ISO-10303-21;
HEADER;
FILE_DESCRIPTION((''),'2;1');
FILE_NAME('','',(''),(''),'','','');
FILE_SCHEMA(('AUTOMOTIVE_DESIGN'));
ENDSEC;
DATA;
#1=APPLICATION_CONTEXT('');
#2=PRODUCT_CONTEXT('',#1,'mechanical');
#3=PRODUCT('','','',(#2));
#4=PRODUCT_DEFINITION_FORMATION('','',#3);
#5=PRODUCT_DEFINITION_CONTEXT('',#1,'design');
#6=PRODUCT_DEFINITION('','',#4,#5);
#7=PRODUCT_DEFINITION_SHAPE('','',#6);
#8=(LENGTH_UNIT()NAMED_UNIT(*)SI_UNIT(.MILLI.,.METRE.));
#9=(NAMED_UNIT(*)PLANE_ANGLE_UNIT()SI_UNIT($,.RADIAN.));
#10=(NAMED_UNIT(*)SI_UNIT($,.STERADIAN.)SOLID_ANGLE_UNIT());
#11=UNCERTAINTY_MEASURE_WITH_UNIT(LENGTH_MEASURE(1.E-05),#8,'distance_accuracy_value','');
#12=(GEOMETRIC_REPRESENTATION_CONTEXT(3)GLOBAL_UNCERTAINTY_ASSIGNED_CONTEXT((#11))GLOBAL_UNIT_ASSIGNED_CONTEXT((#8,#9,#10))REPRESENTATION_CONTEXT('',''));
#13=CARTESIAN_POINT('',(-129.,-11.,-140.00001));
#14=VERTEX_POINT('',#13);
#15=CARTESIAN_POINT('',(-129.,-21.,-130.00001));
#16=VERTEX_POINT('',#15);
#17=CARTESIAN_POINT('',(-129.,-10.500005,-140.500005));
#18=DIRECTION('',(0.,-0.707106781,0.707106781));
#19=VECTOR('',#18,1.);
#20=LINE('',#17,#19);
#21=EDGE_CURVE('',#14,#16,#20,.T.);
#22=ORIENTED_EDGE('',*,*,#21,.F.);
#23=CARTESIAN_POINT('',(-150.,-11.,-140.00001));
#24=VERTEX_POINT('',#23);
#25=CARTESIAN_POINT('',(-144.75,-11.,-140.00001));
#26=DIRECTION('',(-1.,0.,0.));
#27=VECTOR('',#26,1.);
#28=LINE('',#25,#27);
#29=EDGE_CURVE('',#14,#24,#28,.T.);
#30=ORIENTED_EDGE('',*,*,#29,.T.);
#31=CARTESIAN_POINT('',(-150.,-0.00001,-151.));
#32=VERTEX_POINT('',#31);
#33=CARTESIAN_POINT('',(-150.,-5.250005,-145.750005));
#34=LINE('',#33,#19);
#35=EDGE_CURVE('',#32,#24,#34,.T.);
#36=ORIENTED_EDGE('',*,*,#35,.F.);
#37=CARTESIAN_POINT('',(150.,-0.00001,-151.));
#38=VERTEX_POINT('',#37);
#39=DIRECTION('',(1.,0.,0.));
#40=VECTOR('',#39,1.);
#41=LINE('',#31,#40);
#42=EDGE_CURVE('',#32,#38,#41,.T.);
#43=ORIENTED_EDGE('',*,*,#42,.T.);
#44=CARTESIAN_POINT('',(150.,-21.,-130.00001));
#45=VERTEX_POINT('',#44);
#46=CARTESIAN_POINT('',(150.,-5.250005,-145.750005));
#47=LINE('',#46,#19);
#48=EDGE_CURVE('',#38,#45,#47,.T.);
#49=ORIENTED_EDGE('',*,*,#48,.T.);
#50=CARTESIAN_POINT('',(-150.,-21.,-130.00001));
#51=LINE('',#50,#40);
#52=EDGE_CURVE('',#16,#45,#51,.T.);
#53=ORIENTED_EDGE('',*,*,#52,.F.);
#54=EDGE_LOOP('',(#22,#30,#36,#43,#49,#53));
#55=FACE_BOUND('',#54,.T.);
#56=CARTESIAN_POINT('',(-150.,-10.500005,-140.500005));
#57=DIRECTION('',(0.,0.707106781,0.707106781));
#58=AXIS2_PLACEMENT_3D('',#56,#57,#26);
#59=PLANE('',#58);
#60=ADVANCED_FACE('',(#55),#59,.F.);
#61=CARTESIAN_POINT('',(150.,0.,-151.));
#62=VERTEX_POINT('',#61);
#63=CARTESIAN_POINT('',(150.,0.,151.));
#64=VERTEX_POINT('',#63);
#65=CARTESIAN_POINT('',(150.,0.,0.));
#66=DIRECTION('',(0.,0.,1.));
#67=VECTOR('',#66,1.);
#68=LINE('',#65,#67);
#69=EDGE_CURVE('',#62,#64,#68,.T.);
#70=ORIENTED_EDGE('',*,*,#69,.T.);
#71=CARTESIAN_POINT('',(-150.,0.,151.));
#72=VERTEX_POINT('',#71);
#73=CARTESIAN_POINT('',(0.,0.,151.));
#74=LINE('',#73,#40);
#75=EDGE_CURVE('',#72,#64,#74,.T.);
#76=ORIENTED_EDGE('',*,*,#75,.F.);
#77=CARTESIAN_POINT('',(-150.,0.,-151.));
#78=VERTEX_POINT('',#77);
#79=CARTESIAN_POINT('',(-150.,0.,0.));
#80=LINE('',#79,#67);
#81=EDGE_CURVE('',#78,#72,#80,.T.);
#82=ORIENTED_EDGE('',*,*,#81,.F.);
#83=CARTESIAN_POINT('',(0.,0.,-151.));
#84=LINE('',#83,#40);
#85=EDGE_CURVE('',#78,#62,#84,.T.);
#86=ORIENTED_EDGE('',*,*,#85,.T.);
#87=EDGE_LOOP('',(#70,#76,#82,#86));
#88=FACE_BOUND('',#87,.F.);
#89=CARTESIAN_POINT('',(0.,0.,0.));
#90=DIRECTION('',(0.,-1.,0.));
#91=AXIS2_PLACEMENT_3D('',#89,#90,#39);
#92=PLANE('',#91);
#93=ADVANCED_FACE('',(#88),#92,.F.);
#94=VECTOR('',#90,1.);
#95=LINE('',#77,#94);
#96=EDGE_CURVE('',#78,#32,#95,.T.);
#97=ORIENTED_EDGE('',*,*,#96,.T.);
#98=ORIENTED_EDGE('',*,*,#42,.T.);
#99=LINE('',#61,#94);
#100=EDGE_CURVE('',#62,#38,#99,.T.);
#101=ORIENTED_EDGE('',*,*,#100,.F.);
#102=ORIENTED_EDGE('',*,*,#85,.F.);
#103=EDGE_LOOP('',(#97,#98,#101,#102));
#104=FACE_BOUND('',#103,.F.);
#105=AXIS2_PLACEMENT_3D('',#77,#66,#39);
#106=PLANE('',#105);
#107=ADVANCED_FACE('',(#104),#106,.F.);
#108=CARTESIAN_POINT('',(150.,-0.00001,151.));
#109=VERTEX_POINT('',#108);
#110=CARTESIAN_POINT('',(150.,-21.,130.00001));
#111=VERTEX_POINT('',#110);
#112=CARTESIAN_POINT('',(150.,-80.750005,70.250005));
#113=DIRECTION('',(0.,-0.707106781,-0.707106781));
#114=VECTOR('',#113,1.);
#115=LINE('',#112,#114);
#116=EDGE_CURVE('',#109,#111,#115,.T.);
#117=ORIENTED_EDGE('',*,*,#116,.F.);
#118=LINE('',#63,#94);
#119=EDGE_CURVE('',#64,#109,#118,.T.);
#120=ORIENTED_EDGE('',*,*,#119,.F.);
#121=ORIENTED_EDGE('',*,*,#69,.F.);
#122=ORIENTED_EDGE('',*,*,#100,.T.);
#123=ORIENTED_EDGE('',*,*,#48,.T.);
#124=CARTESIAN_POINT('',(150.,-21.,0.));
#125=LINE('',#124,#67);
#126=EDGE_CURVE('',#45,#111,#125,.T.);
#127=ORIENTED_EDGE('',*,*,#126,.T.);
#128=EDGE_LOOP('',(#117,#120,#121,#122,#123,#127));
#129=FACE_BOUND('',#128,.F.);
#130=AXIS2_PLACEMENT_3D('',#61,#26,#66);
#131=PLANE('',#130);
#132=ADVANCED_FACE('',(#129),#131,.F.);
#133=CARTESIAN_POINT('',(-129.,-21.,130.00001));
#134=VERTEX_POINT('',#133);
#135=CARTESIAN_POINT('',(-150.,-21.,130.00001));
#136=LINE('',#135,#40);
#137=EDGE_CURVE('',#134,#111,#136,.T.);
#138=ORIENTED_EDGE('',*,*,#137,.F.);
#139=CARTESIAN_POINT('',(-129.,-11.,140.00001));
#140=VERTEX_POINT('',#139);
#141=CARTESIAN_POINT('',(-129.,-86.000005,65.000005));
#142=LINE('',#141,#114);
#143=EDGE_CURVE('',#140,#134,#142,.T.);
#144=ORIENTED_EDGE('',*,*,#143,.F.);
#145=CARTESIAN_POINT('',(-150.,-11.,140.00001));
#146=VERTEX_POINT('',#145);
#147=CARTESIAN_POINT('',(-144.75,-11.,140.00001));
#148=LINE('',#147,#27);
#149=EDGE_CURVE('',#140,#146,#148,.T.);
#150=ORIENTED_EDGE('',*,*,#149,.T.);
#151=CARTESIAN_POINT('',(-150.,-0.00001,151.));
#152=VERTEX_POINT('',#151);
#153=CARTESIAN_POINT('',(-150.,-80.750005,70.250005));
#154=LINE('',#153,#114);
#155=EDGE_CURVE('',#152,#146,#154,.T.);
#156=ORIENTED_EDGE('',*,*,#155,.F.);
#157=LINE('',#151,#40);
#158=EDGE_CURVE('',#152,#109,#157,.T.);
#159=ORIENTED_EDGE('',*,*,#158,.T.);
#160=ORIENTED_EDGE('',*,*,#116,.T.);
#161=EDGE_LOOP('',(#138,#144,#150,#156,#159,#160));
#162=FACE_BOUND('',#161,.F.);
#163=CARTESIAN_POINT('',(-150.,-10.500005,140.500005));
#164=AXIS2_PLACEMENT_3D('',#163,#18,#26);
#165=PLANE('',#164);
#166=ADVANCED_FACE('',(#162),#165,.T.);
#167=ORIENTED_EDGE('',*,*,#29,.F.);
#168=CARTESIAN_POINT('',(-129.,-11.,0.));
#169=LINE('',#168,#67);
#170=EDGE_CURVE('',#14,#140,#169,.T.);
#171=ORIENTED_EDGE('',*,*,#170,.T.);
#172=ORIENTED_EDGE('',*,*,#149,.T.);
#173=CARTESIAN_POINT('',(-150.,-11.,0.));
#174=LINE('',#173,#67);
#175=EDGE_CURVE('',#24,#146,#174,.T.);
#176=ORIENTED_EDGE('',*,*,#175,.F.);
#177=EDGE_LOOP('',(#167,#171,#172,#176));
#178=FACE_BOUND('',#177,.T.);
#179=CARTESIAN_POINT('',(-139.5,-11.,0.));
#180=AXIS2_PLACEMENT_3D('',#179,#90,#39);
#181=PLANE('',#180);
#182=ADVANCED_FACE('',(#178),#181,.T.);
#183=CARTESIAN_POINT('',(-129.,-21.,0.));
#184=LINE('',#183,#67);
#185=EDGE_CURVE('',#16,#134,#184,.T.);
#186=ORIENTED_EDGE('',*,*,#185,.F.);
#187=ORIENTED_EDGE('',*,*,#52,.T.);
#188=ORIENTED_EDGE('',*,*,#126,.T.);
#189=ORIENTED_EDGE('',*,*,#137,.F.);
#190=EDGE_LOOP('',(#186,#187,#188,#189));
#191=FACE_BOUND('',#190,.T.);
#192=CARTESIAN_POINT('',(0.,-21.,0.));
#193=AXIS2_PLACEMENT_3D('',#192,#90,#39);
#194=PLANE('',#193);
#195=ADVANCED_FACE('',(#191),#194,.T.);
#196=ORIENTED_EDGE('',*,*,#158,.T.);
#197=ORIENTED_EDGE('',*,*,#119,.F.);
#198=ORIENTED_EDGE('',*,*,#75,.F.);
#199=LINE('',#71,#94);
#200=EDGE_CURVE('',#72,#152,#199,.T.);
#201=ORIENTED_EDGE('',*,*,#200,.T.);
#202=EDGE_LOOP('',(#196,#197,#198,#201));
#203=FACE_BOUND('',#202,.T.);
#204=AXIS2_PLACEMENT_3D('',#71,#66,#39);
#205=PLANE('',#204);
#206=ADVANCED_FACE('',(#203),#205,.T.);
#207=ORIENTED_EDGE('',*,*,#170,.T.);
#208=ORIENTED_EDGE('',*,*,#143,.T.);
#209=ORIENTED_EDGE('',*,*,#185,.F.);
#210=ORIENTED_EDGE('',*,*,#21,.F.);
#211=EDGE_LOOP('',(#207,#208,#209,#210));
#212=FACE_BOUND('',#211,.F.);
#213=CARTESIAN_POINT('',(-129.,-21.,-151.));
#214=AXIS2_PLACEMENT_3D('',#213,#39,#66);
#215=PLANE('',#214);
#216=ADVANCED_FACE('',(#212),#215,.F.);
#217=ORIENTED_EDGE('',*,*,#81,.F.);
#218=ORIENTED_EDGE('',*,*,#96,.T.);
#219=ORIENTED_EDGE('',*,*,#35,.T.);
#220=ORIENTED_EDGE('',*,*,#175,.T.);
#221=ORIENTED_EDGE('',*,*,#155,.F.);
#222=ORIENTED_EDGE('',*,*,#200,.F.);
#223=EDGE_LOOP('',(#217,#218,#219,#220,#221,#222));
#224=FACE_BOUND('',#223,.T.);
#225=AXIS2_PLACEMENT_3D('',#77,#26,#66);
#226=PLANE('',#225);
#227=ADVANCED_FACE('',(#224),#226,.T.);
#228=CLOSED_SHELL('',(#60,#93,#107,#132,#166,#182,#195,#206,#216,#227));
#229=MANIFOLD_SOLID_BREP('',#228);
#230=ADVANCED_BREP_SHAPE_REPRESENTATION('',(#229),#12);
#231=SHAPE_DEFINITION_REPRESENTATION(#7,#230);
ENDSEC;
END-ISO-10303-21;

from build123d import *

# Parameters (mm, degrees)
F0_W     = 300
F0_H     = 302
F1_DEPTH = 21
F2_SIZE  = 20.99999
F3_W     = 21
F3_H     = 302
F4_DEPTH = 10


# Not quite as in the source:
# - a fillet or chamfer is up to 0.001 mm smaller than in the source, because OpenCascade refuses the exact size


with BuildPart() as f1:
    # F0 (on Front) → F1 (new body)
    with BuildSketch(Plane.XZ):
        Rectangle(F0_W, F0_H)
    extrude(amount=F1_DEPTH)

    # F2 (size 21 in the source; OpenCascade refuses exactly that, so slightly less here)
    f2_edges = [f1.edges().sort_by_distance(p)[0] for p in [
        (0, -21, 151),
        (0, -21, -151),
    ]]
    chamfer(f2_edges, length=F2_SIZE)

    # F3 (on face) → F4 (cut)
    with BuildSketch(Plane.XZ.offset(21)):
        with Locations((-139.5, 0)):
            Rectangle(F3_W, F3_H)
    extrude(amount=-F4_DEPTH, mode=Mode.SUBTRACT)


solid = f1.part
